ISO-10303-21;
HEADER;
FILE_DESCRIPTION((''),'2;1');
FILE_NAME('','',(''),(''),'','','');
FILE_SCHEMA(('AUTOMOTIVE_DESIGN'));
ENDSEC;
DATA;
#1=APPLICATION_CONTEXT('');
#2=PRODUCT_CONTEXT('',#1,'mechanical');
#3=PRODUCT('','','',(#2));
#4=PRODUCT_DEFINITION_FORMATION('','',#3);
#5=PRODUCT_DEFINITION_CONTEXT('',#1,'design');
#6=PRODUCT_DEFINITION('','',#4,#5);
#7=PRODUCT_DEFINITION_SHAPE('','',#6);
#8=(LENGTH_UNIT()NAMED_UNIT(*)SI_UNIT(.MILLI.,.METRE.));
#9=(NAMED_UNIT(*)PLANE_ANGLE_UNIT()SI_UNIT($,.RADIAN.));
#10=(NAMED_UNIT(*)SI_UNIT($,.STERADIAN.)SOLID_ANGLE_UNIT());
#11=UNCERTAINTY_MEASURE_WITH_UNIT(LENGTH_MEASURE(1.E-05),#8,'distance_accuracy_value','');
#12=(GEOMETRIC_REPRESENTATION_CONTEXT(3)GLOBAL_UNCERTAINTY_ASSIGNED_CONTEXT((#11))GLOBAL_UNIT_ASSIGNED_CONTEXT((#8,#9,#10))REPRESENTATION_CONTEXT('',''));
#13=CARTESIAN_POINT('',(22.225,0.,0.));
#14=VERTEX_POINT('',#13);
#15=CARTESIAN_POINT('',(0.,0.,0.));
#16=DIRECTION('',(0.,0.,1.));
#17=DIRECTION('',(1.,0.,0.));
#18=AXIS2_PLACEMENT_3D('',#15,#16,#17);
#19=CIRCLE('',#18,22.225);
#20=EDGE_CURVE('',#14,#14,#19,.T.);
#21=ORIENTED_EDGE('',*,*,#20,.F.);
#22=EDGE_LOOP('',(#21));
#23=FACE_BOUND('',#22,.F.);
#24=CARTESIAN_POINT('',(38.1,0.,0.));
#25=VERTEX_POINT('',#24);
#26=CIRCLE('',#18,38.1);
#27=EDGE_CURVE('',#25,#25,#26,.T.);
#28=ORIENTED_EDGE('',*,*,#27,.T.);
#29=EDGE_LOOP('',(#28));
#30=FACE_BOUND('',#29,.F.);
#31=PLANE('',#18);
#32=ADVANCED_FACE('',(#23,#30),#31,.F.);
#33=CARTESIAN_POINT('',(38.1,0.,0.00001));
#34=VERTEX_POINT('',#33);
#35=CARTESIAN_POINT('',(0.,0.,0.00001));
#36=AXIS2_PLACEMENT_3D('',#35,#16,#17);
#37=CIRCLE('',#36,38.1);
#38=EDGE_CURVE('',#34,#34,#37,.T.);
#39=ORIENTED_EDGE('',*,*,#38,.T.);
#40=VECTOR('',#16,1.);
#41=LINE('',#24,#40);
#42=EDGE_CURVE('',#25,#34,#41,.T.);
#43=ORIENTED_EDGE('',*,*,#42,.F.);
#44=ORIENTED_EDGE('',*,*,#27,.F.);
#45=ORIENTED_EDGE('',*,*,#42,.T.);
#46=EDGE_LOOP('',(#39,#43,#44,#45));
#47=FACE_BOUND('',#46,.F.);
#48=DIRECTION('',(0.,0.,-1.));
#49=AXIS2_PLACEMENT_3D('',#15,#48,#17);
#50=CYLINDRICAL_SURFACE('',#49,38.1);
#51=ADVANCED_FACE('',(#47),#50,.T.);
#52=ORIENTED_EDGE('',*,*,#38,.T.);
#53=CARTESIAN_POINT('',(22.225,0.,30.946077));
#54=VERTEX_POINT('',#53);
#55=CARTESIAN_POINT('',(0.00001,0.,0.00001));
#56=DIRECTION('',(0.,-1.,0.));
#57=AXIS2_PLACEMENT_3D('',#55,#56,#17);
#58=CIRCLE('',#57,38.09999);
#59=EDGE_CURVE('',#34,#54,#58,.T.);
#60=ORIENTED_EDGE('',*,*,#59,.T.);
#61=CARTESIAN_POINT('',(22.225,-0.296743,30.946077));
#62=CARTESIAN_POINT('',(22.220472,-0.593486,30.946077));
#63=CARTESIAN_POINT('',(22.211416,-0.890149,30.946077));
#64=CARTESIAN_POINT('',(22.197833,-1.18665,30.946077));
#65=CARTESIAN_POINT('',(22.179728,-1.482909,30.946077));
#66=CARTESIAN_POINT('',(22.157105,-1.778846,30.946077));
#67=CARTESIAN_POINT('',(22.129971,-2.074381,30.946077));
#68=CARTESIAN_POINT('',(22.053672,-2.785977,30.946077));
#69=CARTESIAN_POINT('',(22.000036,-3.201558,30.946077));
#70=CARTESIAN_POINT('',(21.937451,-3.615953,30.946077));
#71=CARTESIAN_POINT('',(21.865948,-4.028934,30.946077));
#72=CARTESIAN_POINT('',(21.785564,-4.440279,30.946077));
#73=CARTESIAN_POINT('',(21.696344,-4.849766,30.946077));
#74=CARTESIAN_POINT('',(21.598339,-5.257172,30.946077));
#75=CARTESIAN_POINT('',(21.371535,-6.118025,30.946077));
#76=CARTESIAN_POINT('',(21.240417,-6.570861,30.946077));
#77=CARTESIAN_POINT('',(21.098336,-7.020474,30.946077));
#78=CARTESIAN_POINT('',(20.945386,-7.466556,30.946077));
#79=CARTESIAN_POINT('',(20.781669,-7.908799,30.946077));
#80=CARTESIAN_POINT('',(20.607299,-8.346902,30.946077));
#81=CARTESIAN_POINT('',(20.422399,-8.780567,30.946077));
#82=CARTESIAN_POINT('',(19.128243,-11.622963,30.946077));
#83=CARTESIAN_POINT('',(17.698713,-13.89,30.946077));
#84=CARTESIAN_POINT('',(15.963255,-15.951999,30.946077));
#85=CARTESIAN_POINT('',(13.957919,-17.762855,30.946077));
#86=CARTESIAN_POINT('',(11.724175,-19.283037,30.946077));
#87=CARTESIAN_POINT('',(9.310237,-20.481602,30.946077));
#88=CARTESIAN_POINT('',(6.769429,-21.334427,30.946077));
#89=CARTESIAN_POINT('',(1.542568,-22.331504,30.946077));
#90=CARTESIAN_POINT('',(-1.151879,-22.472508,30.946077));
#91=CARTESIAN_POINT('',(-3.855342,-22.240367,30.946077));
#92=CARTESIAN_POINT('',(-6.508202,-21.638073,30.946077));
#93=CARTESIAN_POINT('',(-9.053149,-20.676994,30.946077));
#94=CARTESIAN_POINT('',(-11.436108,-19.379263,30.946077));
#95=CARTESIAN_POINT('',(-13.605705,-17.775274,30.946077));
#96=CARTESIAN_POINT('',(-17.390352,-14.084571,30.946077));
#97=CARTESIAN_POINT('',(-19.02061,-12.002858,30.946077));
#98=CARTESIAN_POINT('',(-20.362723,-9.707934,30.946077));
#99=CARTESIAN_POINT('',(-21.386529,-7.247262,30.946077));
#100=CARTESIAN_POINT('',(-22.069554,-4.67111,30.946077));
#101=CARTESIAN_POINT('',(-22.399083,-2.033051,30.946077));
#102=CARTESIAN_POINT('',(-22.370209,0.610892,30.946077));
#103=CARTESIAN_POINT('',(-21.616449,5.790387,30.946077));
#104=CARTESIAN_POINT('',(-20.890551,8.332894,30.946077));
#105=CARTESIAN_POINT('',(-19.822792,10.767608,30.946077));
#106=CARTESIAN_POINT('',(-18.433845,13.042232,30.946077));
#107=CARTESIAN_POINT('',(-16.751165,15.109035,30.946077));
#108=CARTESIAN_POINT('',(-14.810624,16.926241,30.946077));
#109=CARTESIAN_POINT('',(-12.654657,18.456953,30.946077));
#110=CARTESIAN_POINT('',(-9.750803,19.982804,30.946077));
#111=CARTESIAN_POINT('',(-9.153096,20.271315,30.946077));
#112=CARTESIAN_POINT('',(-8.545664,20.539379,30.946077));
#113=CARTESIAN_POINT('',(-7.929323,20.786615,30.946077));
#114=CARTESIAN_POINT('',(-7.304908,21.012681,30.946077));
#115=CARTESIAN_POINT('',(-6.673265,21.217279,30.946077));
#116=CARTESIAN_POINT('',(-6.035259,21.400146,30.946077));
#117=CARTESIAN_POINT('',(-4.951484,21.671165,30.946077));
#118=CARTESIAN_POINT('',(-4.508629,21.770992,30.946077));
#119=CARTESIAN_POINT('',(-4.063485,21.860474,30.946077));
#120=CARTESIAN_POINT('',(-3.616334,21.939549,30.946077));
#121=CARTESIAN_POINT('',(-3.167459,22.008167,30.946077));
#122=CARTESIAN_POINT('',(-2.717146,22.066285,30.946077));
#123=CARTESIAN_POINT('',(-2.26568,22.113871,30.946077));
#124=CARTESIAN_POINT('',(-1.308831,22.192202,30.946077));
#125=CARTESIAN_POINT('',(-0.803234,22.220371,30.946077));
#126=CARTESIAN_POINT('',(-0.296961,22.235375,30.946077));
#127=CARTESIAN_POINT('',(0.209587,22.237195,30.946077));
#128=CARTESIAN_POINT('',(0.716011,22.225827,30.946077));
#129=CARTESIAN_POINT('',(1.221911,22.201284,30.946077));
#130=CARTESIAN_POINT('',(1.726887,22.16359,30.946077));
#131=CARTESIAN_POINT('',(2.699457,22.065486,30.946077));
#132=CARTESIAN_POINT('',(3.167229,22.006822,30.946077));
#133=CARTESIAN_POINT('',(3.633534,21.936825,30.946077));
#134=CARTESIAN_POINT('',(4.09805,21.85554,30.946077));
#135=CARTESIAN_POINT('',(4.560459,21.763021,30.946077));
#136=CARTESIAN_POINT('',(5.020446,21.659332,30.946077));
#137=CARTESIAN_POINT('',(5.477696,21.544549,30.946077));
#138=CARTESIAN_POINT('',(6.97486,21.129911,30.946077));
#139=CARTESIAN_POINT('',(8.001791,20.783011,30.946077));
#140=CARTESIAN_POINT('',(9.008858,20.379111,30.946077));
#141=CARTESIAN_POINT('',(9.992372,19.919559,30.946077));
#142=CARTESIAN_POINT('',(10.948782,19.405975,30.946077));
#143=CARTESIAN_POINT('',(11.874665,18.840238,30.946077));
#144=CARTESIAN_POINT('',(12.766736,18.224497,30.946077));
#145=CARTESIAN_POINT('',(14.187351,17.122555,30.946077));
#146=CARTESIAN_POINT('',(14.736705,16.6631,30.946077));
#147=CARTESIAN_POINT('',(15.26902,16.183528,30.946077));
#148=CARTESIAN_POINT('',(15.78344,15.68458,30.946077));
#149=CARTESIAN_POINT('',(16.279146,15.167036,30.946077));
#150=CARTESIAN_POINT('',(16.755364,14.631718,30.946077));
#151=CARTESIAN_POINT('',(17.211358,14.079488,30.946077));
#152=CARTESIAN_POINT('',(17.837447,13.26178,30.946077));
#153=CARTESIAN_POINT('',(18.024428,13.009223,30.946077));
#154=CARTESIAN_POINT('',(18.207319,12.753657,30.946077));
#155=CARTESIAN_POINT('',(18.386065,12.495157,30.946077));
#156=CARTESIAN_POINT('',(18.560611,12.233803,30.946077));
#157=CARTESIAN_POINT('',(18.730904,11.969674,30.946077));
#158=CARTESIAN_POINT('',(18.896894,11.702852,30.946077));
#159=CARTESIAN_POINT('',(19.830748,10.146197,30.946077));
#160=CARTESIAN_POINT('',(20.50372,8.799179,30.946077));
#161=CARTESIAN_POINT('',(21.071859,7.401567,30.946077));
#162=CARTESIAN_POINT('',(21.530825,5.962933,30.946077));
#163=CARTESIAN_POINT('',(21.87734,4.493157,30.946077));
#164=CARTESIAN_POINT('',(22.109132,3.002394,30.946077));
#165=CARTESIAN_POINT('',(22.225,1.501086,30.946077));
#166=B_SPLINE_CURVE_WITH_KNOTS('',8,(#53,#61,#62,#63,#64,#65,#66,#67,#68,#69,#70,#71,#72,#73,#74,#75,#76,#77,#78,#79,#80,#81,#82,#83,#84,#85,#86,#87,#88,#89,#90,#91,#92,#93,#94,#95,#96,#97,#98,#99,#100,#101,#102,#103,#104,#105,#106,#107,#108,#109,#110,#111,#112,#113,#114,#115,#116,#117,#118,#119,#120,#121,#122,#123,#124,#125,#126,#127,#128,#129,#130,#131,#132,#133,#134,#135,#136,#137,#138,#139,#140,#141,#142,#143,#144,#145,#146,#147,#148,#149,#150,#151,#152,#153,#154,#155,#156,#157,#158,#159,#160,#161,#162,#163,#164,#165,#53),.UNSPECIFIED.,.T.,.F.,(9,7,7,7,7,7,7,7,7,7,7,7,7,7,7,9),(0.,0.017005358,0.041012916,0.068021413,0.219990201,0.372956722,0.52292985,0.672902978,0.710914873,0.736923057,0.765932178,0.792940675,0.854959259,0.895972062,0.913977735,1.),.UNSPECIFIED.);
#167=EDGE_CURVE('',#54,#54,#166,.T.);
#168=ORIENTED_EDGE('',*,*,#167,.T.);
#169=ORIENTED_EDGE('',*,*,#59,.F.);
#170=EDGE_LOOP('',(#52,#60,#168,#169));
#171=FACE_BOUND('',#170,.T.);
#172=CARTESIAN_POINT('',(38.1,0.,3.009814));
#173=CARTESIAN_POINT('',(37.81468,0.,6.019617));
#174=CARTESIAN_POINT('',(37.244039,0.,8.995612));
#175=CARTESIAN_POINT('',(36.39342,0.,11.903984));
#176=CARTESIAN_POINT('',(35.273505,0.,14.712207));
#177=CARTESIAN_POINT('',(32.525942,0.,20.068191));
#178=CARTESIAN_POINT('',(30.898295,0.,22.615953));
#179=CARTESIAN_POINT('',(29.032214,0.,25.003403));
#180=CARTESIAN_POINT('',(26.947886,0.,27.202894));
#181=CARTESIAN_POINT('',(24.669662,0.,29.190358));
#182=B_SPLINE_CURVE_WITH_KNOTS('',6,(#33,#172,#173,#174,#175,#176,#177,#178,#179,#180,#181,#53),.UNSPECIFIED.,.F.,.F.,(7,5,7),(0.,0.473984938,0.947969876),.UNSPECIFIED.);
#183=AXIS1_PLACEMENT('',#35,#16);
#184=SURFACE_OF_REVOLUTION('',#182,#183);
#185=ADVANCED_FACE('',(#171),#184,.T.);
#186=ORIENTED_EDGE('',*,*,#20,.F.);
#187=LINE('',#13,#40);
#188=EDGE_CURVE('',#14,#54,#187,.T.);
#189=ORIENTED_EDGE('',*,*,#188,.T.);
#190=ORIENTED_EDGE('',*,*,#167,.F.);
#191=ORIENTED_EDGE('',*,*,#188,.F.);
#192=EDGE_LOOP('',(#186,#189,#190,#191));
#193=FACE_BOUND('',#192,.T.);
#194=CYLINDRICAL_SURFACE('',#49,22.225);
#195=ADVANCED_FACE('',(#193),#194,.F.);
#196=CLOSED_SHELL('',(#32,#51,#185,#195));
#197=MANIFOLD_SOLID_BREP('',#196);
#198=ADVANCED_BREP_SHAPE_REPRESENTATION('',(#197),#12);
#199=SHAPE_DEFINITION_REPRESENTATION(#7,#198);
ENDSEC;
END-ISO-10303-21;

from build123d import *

# Parameters (mm, degrees)
F0_R     = 38.1
F1_DEPTH = 38.1
F2_R     = 38.09999
F3_R     = 22.225
F4_DEPTH = 151.384


# Not quite as in the source:
# - a fillet or chamfer is up to 0.001 mm smaller than in the source, because OpenCascade refuses the exact size


with BuildPart() as f1:
    # F0 (on Top) → F1 (new body)
    with BuildSketch(Plane.XY):
        Circle(F0_R)
    extrude(amount=F1_DEPTH)

    # F2 (radius 38.1 in the source; OpenCascade refuses exactly that, so slightly less here)
    f2_edges = [f1.edges().sort_by_distance(p)[0] for p in [
        (-38.1, 0, 38.1),
    ]]
    fillet(f2_edges, radius=F2_R)

    # F3 (on Top) → F4 (cut)
    with BuildSketch(Plane.XY):
        Circle(F3_R)
    extrude(amount=F4_DEPTH, mode=Mode.SUBTRACT)


solid = f1.part
